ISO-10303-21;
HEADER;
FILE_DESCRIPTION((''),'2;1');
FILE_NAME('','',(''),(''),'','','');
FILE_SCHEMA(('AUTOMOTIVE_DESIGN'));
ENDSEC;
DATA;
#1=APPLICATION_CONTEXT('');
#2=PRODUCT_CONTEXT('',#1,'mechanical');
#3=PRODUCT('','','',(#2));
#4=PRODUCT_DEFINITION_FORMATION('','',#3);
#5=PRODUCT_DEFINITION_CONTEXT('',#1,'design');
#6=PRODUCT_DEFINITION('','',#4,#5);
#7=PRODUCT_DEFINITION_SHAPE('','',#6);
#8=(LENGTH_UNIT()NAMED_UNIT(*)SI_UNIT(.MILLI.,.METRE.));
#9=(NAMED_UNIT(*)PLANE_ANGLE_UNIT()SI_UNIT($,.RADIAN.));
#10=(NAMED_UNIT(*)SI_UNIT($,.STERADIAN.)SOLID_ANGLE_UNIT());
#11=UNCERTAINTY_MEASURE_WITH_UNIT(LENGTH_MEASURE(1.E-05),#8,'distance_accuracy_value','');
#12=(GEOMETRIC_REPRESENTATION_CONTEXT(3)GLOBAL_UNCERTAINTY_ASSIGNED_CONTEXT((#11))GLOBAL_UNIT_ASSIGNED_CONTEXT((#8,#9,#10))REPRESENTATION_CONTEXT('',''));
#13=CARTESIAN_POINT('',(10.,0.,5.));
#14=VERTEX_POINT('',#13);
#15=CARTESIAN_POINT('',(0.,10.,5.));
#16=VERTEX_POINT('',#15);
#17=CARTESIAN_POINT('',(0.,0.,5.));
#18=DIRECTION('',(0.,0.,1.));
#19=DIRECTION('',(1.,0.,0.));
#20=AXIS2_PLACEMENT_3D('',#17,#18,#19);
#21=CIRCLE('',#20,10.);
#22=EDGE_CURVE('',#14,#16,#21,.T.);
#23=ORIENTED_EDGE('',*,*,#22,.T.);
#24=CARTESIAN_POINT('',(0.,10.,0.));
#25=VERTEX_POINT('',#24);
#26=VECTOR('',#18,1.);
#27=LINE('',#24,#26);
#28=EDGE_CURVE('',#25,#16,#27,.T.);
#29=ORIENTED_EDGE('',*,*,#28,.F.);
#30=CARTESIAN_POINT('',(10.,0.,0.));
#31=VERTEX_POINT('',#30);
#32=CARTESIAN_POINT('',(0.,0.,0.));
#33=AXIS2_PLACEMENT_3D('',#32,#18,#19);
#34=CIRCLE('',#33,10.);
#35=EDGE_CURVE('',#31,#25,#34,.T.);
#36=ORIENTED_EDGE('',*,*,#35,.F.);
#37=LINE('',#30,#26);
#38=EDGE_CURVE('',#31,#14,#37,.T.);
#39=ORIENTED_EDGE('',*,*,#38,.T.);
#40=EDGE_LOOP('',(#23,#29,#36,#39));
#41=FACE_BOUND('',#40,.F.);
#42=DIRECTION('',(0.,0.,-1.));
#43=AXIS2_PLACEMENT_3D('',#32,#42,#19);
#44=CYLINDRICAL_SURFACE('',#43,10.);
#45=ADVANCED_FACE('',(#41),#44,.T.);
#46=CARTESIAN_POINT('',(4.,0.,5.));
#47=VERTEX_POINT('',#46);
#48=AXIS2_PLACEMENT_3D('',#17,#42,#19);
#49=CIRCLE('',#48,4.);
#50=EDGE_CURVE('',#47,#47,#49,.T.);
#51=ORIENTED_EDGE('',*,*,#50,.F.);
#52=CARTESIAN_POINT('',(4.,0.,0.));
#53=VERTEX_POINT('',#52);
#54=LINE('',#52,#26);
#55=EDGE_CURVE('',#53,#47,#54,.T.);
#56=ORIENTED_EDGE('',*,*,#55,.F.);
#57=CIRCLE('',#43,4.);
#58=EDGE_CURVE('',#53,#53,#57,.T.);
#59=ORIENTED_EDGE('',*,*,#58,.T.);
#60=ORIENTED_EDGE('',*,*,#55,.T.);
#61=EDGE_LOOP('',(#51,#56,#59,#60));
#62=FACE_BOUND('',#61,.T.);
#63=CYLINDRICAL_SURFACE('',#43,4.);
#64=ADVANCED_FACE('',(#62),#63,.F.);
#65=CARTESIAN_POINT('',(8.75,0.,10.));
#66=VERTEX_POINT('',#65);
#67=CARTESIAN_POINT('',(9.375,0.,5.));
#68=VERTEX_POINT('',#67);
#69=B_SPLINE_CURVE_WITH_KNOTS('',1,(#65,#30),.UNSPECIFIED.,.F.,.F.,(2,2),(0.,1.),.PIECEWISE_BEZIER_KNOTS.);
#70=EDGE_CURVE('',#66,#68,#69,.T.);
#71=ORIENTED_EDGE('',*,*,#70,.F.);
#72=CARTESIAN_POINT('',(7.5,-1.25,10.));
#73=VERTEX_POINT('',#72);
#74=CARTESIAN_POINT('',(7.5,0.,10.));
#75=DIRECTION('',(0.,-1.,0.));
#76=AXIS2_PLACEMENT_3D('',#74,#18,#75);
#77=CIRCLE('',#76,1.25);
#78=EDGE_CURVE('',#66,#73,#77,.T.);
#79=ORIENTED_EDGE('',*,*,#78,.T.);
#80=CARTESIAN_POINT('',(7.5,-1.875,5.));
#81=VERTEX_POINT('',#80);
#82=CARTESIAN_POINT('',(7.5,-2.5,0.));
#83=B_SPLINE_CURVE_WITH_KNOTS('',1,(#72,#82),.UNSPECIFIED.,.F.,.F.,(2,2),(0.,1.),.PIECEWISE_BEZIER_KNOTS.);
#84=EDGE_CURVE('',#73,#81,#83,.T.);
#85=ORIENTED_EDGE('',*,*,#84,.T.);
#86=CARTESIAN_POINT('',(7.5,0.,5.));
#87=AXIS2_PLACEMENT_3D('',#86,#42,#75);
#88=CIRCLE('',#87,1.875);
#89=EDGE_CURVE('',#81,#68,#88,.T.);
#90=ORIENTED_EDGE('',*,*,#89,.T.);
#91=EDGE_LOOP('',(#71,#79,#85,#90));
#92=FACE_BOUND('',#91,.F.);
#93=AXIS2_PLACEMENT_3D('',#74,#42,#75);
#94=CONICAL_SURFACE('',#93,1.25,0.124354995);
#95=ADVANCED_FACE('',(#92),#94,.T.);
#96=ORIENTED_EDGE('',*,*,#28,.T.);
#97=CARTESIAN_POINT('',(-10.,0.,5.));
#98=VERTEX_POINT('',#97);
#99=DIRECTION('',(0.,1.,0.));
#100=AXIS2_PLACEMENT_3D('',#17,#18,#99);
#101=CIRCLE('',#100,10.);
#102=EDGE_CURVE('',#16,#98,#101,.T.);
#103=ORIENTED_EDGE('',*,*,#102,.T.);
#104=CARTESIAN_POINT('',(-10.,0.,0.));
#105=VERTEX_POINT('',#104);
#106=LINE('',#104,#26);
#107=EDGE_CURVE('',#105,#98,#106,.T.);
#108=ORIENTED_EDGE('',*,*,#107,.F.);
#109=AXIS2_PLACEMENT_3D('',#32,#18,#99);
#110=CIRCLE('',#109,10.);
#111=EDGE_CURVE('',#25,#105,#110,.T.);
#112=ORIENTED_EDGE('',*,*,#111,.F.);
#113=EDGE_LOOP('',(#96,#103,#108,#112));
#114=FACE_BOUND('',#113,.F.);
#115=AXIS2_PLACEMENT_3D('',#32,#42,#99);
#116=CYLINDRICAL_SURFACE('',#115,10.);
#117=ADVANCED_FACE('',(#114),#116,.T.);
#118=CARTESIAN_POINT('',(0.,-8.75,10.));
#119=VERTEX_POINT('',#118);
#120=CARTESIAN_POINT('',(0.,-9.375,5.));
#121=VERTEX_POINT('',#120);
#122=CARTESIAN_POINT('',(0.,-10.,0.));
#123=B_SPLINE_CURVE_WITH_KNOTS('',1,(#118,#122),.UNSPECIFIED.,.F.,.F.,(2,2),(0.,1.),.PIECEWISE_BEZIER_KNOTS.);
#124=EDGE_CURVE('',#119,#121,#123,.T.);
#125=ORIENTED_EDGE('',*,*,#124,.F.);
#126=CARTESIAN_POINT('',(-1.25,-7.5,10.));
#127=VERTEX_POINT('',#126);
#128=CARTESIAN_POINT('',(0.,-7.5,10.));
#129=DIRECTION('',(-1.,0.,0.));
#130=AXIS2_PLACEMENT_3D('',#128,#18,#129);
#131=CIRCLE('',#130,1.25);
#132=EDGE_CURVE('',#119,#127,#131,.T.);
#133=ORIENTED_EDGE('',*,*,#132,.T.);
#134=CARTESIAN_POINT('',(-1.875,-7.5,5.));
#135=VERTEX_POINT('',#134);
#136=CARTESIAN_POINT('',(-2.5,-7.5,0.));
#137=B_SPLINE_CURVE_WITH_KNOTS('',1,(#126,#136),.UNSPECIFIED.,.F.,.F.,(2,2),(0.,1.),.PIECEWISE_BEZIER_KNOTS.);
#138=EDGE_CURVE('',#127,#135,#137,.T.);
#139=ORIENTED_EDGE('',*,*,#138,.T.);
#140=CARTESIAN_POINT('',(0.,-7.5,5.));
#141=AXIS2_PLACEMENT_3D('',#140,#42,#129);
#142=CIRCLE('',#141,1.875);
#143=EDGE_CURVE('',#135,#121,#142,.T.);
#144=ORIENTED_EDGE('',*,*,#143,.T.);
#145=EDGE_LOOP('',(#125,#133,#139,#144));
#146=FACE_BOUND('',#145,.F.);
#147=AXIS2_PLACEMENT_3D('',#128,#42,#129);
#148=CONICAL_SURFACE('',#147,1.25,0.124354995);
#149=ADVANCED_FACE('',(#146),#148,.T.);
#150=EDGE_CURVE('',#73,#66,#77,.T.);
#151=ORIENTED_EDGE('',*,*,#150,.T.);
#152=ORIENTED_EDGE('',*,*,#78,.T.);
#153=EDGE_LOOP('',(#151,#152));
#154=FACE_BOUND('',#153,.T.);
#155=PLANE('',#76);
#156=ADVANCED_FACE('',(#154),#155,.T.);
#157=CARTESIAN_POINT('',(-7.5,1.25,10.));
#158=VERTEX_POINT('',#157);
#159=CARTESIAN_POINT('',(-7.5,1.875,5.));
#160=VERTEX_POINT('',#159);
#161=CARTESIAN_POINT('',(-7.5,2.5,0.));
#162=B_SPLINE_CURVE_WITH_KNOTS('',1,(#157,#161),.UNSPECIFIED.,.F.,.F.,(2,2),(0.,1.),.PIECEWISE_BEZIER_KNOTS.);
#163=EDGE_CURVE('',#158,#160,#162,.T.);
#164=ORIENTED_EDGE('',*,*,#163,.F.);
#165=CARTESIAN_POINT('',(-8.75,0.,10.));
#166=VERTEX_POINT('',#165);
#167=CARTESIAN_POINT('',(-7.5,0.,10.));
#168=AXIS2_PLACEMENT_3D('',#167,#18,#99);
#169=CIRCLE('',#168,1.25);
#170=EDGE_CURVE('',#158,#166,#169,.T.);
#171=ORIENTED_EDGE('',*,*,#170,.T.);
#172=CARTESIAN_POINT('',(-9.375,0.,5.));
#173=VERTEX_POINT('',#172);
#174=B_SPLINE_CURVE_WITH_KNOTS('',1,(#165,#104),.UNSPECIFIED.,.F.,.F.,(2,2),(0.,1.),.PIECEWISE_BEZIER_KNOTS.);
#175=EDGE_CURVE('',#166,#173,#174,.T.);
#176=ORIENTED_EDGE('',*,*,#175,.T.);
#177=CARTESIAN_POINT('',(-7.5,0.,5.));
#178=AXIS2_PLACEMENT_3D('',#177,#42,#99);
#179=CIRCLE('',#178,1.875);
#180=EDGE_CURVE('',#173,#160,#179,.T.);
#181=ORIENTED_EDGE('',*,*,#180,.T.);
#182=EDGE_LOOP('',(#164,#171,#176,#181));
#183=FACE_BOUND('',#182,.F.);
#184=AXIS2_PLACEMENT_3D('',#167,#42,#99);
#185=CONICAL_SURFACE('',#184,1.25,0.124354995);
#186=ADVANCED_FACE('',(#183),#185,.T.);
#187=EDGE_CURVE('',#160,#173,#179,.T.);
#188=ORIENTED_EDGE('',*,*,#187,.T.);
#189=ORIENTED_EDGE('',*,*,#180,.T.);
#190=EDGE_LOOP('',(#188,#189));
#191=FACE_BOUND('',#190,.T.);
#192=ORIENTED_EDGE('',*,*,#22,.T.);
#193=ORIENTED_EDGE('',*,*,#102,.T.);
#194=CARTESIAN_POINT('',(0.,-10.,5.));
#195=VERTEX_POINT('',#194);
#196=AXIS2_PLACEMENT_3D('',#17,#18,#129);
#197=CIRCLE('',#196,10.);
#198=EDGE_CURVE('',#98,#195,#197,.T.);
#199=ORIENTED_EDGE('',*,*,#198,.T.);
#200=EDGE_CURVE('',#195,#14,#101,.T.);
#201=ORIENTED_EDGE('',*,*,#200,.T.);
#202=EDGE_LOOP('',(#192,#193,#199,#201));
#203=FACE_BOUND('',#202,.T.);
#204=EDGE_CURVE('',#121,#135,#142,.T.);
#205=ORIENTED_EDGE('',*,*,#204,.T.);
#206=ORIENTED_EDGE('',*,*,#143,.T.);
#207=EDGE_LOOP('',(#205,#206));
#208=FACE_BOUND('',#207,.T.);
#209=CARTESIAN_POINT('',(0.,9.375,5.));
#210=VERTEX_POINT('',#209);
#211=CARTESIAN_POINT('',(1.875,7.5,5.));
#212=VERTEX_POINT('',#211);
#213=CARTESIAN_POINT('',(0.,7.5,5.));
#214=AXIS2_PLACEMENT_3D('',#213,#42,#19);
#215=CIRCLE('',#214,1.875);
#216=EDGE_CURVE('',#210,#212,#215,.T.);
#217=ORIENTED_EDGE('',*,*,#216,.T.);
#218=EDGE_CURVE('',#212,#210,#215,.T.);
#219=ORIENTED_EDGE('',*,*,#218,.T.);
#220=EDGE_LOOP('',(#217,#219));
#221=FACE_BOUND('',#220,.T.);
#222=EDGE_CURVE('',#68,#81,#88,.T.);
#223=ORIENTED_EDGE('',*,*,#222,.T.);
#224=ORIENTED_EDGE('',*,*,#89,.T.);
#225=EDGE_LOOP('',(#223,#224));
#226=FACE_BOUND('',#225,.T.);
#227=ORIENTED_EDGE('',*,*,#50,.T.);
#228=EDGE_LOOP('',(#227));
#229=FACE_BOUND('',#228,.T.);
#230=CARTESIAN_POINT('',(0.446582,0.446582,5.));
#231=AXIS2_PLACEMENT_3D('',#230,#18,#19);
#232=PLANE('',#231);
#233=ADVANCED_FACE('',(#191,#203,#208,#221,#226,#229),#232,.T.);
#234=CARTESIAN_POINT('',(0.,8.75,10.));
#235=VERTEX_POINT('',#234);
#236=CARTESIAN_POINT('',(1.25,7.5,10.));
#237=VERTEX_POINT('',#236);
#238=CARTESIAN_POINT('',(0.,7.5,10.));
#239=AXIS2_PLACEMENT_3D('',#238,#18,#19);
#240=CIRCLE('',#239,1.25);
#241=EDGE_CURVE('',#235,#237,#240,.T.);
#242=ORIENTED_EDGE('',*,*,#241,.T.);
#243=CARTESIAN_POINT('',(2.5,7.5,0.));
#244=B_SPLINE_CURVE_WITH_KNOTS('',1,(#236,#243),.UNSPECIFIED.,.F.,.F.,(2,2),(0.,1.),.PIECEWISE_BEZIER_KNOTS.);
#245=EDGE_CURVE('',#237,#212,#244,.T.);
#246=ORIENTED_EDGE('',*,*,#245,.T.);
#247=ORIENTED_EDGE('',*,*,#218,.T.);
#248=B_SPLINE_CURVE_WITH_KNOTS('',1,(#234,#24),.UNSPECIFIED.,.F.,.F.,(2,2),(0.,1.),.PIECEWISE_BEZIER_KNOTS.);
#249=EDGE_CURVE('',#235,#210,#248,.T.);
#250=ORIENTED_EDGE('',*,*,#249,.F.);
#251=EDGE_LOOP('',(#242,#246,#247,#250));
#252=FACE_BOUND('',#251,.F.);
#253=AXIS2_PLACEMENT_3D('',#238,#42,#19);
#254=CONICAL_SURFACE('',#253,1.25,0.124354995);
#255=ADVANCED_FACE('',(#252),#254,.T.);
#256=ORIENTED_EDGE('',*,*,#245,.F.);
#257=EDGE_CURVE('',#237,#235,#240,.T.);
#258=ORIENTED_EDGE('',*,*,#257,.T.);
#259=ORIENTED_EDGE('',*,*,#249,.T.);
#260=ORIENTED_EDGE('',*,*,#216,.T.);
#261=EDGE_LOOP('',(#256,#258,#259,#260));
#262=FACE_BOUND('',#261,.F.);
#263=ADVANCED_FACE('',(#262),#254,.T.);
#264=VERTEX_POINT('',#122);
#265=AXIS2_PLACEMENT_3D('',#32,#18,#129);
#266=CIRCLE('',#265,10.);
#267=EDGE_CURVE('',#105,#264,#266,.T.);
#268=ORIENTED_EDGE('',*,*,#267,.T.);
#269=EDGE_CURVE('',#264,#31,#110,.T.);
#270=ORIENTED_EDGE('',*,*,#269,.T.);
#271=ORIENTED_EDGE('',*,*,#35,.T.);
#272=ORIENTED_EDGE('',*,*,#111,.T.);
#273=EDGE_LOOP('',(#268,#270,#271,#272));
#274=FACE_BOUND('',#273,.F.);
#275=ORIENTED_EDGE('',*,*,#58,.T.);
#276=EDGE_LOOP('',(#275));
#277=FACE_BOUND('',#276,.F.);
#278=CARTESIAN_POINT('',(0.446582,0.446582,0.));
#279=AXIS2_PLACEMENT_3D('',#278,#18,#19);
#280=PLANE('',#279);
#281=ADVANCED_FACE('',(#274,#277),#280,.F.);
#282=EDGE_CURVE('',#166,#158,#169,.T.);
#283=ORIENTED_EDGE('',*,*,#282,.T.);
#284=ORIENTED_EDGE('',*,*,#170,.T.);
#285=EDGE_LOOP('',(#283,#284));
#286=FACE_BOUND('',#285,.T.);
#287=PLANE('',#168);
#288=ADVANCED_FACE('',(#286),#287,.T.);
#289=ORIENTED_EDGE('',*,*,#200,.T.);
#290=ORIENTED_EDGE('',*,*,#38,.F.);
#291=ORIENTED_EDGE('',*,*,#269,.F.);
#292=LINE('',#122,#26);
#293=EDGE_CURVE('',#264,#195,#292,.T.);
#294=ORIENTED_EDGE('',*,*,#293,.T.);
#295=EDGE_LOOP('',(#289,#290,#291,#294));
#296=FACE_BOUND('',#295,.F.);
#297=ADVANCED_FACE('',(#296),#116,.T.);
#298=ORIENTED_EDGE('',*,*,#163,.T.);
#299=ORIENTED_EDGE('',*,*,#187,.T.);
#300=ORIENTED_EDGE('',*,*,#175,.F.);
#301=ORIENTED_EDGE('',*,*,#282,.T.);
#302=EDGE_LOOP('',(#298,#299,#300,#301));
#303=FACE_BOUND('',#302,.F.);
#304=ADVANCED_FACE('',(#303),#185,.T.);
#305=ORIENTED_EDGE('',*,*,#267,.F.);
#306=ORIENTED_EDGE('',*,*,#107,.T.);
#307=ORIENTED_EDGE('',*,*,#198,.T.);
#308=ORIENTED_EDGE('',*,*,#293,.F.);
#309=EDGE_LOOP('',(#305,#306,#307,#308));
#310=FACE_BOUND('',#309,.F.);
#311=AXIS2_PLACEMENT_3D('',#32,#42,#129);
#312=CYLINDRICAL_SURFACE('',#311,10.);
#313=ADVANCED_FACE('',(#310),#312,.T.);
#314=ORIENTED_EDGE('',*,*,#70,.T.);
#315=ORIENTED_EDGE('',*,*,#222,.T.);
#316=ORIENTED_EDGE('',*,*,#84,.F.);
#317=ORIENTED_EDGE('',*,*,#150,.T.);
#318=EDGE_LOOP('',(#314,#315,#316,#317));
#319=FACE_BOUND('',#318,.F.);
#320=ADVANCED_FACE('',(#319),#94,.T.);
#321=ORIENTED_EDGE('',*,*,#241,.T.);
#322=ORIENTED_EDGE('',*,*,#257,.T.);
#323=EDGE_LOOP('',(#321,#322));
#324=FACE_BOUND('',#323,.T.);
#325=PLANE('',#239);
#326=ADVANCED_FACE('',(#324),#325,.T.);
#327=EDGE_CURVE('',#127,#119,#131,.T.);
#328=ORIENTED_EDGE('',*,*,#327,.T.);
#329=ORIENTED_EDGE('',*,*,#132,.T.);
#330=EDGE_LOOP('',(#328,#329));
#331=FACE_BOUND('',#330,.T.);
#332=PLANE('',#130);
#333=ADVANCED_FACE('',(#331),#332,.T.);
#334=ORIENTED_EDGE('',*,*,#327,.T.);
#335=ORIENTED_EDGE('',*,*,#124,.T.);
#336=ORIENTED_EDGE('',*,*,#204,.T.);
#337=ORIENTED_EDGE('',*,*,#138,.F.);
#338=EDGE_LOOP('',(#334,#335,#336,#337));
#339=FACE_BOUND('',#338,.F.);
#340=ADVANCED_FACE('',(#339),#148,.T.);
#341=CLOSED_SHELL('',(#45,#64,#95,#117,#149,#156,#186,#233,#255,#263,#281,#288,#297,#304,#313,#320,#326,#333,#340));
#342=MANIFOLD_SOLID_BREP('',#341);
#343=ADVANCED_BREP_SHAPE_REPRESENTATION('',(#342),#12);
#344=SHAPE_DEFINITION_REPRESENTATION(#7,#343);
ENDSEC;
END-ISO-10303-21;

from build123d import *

# Parameters (mm, degrees)
F0_R     = 4
F1_DEPTH = 5
F3_R     = 1.25
F6_COUNT = 4


# Not quite as in the source:
# - a feature names something its author has since deleted; it is built from what else it names


with BuildPart() as f1:
    # F0 (on Top) → F1 (new body)
    with BuildSketch(Plane.XY):
        with BuildLine():
            ThreePointArc((0, 10), (-7.0710678119, -7.0710678119), (10, 0))
            ThreePointArc((10, 0), (7.0710678119, 7.0710678119), (0, 10))
        make_face()
        Circle(F0_R, mode=Mode.SUBTRACT)
        with BuildLine():
            ThreePointArc((2.5, 7.5), (-1.767766953, 5.732233047), (0, 10))
            ThreePointArc((0, 10), (1.767766953, 9.267766953), (2.5, 7.5))
        make_face(mode=Mode.SUBTRACT)
        with BuildLine():
            ThreePointArc((2.5, 7.5), (1.767766953, 9.267766953), (0, 10))
            ThreePointArc((0, 10), (-1.767766953, 5.732233047), (2.5, 7.5))
        make_face()
    extrude(amount=F1_DEPTH)

    # F3 (on offset) → F4 section 0
    with BuildSketch(Plane.XY.offset(10)):
        with Locations((0, 7.5)):
            Circle(F3_R)
    # F0 (on Top) → F4 section 1
    with BuildSketch(Plane.XY):
        with BuildLine():
            ThreePointArc((2.5, 7.5), (1.767766953, 9.267766953), (0, 10))
            ThreePointArc((0, 10), (-1.767766953, 5.732233047), (2.5, 7.5))
        make_face()
    loft()

    # F6: F1 ×4 about axis
    f6_axis = Axis((0, 0, 16.9871691614), (0, 0, 1))


with BuildPart() as f1_1:
    add(f1.part)
    for i in range(1, F6_COUNT):
        add(f1.part.rotate(f6_axis, i * 360 / F6_COUNT))


solid = f1_1.part
